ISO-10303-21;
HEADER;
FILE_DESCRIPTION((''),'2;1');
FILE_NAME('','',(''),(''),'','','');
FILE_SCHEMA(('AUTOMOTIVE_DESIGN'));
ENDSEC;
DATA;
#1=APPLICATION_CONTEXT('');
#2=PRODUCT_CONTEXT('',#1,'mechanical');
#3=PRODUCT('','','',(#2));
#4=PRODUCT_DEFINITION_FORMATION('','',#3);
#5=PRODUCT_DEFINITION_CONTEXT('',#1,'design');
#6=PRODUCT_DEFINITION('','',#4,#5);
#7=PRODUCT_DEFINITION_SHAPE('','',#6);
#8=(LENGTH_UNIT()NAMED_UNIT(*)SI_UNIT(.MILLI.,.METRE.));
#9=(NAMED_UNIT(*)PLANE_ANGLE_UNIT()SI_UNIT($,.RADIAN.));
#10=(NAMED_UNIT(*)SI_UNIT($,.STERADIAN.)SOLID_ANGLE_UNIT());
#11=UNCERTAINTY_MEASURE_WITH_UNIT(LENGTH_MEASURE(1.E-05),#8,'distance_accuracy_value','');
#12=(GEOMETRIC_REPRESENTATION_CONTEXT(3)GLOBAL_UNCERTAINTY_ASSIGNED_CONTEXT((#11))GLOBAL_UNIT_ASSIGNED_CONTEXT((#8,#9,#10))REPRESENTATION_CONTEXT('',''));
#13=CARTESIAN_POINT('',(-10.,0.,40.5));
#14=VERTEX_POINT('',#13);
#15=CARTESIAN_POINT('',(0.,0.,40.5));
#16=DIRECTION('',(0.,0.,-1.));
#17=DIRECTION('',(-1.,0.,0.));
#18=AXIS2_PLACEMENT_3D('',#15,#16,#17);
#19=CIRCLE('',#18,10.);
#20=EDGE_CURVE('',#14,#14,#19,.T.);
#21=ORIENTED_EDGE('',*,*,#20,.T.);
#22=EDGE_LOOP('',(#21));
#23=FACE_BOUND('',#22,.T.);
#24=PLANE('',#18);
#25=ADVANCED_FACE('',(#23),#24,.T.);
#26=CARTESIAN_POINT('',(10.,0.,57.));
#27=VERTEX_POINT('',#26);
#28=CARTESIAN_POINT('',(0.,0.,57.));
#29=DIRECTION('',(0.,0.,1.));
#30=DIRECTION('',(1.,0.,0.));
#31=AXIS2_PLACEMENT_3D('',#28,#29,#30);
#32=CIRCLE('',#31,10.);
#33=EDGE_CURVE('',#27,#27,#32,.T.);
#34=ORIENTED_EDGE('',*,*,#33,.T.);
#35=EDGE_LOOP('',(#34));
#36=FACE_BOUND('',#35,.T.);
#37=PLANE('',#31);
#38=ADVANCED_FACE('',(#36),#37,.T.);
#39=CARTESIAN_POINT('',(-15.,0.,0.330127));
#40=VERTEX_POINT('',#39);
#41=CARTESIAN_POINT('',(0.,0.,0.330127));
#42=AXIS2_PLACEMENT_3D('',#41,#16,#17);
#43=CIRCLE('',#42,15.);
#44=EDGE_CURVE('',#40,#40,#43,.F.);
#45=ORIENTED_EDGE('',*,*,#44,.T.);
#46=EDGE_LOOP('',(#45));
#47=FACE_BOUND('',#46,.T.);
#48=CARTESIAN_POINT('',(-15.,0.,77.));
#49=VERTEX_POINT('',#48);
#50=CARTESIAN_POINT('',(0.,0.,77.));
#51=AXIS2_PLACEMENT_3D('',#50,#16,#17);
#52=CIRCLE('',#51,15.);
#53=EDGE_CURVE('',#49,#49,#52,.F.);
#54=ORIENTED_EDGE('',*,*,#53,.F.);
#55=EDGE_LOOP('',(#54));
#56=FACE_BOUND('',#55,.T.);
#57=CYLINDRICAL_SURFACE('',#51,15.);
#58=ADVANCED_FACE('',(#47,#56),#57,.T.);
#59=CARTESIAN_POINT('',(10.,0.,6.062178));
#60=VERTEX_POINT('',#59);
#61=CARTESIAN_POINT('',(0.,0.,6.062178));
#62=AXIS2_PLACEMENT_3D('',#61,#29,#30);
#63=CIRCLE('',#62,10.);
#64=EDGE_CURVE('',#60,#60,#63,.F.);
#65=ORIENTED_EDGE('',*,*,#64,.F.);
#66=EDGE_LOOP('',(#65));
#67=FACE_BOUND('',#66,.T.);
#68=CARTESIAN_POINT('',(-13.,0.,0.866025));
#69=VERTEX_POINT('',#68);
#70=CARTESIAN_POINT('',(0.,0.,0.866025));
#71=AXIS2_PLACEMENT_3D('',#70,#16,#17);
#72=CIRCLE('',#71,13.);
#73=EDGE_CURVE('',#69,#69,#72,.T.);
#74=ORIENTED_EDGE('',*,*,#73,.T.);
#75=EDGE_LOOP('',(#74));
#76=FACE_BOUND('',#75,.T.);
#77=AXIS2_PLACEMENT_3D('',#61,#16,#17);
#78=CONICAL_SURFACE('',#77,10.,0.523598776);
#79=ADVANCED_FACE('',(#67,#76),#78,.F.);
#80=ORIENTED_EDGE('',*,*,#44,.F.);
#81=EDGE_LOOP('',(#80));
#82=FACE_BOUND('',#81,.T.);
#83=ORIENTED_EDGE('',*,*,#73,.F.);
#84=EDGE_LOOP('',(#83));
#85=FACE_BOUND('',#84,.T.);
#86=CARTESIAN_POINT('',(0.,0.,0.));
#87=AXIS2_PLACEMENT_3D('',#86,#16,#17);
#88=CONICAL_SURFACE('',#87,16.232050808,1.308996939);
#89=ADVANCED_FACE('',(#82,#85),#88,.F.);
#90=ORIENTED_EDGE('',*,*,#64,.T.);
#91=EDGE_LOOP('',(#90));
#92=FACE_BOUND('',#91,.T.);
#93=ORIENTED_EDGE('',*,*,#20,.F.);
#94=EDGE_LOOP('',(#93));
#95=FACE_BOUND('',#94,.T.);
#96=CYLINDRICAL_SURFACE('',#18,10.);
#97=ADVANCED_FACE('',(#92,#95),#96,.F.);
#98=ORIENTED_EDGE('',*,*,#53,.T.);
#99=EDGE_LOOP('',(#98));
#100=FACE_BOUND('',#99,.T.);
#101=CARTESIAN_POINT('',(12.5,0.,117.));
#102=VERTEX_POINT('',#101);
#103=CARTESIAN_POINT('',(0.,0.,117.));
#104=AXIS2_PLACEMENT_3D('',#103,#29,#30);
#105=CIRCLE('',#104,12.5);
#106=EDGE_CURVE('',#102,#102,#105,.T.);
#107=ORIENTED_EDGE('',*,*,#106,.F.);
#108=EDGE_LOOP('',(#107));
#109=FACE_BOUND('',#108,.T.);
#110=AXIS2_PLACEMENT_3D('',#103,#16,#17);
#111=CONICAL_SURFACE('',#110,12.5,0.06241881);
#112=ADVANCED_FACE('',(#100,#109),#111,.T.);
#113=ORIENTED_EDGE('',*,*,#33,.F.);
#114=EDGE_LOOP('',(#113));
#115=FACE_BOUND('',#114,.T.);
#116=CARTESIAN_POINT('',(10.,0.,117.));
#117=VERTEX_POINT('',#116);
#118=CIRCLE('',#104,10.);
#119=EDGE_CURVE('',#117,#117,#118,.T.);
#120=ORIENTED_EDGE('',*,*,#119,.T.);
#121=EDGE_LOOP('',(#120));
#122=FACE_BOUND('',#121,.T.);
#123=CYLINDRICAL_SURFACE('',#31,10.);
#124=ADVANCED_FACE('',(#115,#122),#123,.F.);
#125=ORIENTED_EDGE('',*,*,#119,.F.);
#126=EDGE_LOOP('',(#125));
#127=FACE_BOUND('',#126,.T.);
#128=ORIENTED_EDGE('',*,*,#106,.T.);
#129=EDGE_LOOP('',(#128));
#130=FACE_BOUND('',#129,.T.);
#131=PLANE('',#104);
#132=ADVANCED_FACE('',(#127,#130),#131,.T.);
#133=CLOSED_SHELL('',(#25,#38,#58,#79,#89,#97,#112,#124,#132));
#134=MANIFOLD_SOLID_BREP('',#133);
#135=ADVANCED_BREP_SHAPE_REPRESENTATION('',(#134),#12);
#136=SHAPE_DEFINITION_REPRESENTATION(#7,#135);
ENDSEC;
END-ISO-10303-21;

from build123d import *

# Parameters (mm, degrees)
SKETCH_1_R          = 15
EXTRUDE_1_DEPTH     = 77
SKETCH_3_R          = 12.5
SKETCH_2_R          = 15
SKETCH_5_R          = 10
CUT_EXTRUDE_1_DEPTH = 60
CUT_EXTRUDE_START   = -40.5
SKETCH_6_R          = 10
CUT_EXTRUDE_2_DEPTH = 40.5
CHAMFER_1_SIZE      = 3.5
CHAMFER_1_SIZE2     = 6.062177826
CHAMFER_2_SIZE      = 2.732050808
CHAMFER_2_SIZE_2    = 1


with BuildPart() as part:
    # 스케치1 → 보스-돌출1 (new body)
    with BuildSketch(Plane.XY):
        Circle(SKETCH_1_R)
    extrude(amount=EXTRUDE_1_DEPTH)

    # 스케치3 → 로프트1 section 0
    with BuildSketch(Plane.XY.offset(117)):
        Circle(SKETCH_3_R)
    # 스케치2 → 로프트1 section 1
    with BuildSketch(Plane.XY.offset(77)):
        Circle(SKETCH_2_R)
    loft()

    # 스케치5 → 컷-돌출1 (cut)
    with BuildSketch(Plane.XY.offset(117)):
        Circle(SKETCH_5_R)
    extrude(amount=-CUT_EXTRUDE_1_DEPTH, mode=Mode.SUBTRACT)

    # 스케치6 → 컷-돌출2 (cut)
    with BuildSketch(Plane(origin=(0, 0, 0), x_dir=(-1, 0, 0), z_dir=(0, 0, -1)).offset(CUT_EXTRUDE_START)):
        with Locations(Location((0, 0, 0), (0, 0, 180))):
            Circle(SKETCH_6_R)
    extrude(amount=CUT_EXTRUDE_2_DEPTH, mode=Mode.SUBTRACT)

    # 모따기1
    chamfer_1_edges = [part.edges().sort_by_distance(p)[0] for p in [
        (-10, 0, 0),
    ]]
    chamfer_1_side = [part.faces().sort_by_distance(p)[0] for p in [
        (-14.575735931, 0, 0),
    ]]
    chamfer(chamfer_1_edges, length=CHAMFER_1_SIZE, length2=CHAMFER_1_SIZE2, reference=chamfer_1_side[0])

    # 모따기2
    # the kernel refuses this chamfer: 2.732050808, 1 mm, written as the material it takes off along each edge
    with BuildSketch(Plane(origin=(0, 0, 0), x_dir=(1, 0, 0), z_dir=(0, 1, 0))) as chamfer_2_piece_1:
        Polygon((13.5 + CHAMFER_2_SIZE, 0), (13.5 - CHAMFER_2_SIZE_2 * 0.5, -CHAMFER_2_SIZE_2 * 0.866025403784), (13.5, 0), align=None)
    revolve(axis=Axis((0, 0, 0), (0, 0, -1)), mode=Mode.SUBTRACT)


solid = part.part
